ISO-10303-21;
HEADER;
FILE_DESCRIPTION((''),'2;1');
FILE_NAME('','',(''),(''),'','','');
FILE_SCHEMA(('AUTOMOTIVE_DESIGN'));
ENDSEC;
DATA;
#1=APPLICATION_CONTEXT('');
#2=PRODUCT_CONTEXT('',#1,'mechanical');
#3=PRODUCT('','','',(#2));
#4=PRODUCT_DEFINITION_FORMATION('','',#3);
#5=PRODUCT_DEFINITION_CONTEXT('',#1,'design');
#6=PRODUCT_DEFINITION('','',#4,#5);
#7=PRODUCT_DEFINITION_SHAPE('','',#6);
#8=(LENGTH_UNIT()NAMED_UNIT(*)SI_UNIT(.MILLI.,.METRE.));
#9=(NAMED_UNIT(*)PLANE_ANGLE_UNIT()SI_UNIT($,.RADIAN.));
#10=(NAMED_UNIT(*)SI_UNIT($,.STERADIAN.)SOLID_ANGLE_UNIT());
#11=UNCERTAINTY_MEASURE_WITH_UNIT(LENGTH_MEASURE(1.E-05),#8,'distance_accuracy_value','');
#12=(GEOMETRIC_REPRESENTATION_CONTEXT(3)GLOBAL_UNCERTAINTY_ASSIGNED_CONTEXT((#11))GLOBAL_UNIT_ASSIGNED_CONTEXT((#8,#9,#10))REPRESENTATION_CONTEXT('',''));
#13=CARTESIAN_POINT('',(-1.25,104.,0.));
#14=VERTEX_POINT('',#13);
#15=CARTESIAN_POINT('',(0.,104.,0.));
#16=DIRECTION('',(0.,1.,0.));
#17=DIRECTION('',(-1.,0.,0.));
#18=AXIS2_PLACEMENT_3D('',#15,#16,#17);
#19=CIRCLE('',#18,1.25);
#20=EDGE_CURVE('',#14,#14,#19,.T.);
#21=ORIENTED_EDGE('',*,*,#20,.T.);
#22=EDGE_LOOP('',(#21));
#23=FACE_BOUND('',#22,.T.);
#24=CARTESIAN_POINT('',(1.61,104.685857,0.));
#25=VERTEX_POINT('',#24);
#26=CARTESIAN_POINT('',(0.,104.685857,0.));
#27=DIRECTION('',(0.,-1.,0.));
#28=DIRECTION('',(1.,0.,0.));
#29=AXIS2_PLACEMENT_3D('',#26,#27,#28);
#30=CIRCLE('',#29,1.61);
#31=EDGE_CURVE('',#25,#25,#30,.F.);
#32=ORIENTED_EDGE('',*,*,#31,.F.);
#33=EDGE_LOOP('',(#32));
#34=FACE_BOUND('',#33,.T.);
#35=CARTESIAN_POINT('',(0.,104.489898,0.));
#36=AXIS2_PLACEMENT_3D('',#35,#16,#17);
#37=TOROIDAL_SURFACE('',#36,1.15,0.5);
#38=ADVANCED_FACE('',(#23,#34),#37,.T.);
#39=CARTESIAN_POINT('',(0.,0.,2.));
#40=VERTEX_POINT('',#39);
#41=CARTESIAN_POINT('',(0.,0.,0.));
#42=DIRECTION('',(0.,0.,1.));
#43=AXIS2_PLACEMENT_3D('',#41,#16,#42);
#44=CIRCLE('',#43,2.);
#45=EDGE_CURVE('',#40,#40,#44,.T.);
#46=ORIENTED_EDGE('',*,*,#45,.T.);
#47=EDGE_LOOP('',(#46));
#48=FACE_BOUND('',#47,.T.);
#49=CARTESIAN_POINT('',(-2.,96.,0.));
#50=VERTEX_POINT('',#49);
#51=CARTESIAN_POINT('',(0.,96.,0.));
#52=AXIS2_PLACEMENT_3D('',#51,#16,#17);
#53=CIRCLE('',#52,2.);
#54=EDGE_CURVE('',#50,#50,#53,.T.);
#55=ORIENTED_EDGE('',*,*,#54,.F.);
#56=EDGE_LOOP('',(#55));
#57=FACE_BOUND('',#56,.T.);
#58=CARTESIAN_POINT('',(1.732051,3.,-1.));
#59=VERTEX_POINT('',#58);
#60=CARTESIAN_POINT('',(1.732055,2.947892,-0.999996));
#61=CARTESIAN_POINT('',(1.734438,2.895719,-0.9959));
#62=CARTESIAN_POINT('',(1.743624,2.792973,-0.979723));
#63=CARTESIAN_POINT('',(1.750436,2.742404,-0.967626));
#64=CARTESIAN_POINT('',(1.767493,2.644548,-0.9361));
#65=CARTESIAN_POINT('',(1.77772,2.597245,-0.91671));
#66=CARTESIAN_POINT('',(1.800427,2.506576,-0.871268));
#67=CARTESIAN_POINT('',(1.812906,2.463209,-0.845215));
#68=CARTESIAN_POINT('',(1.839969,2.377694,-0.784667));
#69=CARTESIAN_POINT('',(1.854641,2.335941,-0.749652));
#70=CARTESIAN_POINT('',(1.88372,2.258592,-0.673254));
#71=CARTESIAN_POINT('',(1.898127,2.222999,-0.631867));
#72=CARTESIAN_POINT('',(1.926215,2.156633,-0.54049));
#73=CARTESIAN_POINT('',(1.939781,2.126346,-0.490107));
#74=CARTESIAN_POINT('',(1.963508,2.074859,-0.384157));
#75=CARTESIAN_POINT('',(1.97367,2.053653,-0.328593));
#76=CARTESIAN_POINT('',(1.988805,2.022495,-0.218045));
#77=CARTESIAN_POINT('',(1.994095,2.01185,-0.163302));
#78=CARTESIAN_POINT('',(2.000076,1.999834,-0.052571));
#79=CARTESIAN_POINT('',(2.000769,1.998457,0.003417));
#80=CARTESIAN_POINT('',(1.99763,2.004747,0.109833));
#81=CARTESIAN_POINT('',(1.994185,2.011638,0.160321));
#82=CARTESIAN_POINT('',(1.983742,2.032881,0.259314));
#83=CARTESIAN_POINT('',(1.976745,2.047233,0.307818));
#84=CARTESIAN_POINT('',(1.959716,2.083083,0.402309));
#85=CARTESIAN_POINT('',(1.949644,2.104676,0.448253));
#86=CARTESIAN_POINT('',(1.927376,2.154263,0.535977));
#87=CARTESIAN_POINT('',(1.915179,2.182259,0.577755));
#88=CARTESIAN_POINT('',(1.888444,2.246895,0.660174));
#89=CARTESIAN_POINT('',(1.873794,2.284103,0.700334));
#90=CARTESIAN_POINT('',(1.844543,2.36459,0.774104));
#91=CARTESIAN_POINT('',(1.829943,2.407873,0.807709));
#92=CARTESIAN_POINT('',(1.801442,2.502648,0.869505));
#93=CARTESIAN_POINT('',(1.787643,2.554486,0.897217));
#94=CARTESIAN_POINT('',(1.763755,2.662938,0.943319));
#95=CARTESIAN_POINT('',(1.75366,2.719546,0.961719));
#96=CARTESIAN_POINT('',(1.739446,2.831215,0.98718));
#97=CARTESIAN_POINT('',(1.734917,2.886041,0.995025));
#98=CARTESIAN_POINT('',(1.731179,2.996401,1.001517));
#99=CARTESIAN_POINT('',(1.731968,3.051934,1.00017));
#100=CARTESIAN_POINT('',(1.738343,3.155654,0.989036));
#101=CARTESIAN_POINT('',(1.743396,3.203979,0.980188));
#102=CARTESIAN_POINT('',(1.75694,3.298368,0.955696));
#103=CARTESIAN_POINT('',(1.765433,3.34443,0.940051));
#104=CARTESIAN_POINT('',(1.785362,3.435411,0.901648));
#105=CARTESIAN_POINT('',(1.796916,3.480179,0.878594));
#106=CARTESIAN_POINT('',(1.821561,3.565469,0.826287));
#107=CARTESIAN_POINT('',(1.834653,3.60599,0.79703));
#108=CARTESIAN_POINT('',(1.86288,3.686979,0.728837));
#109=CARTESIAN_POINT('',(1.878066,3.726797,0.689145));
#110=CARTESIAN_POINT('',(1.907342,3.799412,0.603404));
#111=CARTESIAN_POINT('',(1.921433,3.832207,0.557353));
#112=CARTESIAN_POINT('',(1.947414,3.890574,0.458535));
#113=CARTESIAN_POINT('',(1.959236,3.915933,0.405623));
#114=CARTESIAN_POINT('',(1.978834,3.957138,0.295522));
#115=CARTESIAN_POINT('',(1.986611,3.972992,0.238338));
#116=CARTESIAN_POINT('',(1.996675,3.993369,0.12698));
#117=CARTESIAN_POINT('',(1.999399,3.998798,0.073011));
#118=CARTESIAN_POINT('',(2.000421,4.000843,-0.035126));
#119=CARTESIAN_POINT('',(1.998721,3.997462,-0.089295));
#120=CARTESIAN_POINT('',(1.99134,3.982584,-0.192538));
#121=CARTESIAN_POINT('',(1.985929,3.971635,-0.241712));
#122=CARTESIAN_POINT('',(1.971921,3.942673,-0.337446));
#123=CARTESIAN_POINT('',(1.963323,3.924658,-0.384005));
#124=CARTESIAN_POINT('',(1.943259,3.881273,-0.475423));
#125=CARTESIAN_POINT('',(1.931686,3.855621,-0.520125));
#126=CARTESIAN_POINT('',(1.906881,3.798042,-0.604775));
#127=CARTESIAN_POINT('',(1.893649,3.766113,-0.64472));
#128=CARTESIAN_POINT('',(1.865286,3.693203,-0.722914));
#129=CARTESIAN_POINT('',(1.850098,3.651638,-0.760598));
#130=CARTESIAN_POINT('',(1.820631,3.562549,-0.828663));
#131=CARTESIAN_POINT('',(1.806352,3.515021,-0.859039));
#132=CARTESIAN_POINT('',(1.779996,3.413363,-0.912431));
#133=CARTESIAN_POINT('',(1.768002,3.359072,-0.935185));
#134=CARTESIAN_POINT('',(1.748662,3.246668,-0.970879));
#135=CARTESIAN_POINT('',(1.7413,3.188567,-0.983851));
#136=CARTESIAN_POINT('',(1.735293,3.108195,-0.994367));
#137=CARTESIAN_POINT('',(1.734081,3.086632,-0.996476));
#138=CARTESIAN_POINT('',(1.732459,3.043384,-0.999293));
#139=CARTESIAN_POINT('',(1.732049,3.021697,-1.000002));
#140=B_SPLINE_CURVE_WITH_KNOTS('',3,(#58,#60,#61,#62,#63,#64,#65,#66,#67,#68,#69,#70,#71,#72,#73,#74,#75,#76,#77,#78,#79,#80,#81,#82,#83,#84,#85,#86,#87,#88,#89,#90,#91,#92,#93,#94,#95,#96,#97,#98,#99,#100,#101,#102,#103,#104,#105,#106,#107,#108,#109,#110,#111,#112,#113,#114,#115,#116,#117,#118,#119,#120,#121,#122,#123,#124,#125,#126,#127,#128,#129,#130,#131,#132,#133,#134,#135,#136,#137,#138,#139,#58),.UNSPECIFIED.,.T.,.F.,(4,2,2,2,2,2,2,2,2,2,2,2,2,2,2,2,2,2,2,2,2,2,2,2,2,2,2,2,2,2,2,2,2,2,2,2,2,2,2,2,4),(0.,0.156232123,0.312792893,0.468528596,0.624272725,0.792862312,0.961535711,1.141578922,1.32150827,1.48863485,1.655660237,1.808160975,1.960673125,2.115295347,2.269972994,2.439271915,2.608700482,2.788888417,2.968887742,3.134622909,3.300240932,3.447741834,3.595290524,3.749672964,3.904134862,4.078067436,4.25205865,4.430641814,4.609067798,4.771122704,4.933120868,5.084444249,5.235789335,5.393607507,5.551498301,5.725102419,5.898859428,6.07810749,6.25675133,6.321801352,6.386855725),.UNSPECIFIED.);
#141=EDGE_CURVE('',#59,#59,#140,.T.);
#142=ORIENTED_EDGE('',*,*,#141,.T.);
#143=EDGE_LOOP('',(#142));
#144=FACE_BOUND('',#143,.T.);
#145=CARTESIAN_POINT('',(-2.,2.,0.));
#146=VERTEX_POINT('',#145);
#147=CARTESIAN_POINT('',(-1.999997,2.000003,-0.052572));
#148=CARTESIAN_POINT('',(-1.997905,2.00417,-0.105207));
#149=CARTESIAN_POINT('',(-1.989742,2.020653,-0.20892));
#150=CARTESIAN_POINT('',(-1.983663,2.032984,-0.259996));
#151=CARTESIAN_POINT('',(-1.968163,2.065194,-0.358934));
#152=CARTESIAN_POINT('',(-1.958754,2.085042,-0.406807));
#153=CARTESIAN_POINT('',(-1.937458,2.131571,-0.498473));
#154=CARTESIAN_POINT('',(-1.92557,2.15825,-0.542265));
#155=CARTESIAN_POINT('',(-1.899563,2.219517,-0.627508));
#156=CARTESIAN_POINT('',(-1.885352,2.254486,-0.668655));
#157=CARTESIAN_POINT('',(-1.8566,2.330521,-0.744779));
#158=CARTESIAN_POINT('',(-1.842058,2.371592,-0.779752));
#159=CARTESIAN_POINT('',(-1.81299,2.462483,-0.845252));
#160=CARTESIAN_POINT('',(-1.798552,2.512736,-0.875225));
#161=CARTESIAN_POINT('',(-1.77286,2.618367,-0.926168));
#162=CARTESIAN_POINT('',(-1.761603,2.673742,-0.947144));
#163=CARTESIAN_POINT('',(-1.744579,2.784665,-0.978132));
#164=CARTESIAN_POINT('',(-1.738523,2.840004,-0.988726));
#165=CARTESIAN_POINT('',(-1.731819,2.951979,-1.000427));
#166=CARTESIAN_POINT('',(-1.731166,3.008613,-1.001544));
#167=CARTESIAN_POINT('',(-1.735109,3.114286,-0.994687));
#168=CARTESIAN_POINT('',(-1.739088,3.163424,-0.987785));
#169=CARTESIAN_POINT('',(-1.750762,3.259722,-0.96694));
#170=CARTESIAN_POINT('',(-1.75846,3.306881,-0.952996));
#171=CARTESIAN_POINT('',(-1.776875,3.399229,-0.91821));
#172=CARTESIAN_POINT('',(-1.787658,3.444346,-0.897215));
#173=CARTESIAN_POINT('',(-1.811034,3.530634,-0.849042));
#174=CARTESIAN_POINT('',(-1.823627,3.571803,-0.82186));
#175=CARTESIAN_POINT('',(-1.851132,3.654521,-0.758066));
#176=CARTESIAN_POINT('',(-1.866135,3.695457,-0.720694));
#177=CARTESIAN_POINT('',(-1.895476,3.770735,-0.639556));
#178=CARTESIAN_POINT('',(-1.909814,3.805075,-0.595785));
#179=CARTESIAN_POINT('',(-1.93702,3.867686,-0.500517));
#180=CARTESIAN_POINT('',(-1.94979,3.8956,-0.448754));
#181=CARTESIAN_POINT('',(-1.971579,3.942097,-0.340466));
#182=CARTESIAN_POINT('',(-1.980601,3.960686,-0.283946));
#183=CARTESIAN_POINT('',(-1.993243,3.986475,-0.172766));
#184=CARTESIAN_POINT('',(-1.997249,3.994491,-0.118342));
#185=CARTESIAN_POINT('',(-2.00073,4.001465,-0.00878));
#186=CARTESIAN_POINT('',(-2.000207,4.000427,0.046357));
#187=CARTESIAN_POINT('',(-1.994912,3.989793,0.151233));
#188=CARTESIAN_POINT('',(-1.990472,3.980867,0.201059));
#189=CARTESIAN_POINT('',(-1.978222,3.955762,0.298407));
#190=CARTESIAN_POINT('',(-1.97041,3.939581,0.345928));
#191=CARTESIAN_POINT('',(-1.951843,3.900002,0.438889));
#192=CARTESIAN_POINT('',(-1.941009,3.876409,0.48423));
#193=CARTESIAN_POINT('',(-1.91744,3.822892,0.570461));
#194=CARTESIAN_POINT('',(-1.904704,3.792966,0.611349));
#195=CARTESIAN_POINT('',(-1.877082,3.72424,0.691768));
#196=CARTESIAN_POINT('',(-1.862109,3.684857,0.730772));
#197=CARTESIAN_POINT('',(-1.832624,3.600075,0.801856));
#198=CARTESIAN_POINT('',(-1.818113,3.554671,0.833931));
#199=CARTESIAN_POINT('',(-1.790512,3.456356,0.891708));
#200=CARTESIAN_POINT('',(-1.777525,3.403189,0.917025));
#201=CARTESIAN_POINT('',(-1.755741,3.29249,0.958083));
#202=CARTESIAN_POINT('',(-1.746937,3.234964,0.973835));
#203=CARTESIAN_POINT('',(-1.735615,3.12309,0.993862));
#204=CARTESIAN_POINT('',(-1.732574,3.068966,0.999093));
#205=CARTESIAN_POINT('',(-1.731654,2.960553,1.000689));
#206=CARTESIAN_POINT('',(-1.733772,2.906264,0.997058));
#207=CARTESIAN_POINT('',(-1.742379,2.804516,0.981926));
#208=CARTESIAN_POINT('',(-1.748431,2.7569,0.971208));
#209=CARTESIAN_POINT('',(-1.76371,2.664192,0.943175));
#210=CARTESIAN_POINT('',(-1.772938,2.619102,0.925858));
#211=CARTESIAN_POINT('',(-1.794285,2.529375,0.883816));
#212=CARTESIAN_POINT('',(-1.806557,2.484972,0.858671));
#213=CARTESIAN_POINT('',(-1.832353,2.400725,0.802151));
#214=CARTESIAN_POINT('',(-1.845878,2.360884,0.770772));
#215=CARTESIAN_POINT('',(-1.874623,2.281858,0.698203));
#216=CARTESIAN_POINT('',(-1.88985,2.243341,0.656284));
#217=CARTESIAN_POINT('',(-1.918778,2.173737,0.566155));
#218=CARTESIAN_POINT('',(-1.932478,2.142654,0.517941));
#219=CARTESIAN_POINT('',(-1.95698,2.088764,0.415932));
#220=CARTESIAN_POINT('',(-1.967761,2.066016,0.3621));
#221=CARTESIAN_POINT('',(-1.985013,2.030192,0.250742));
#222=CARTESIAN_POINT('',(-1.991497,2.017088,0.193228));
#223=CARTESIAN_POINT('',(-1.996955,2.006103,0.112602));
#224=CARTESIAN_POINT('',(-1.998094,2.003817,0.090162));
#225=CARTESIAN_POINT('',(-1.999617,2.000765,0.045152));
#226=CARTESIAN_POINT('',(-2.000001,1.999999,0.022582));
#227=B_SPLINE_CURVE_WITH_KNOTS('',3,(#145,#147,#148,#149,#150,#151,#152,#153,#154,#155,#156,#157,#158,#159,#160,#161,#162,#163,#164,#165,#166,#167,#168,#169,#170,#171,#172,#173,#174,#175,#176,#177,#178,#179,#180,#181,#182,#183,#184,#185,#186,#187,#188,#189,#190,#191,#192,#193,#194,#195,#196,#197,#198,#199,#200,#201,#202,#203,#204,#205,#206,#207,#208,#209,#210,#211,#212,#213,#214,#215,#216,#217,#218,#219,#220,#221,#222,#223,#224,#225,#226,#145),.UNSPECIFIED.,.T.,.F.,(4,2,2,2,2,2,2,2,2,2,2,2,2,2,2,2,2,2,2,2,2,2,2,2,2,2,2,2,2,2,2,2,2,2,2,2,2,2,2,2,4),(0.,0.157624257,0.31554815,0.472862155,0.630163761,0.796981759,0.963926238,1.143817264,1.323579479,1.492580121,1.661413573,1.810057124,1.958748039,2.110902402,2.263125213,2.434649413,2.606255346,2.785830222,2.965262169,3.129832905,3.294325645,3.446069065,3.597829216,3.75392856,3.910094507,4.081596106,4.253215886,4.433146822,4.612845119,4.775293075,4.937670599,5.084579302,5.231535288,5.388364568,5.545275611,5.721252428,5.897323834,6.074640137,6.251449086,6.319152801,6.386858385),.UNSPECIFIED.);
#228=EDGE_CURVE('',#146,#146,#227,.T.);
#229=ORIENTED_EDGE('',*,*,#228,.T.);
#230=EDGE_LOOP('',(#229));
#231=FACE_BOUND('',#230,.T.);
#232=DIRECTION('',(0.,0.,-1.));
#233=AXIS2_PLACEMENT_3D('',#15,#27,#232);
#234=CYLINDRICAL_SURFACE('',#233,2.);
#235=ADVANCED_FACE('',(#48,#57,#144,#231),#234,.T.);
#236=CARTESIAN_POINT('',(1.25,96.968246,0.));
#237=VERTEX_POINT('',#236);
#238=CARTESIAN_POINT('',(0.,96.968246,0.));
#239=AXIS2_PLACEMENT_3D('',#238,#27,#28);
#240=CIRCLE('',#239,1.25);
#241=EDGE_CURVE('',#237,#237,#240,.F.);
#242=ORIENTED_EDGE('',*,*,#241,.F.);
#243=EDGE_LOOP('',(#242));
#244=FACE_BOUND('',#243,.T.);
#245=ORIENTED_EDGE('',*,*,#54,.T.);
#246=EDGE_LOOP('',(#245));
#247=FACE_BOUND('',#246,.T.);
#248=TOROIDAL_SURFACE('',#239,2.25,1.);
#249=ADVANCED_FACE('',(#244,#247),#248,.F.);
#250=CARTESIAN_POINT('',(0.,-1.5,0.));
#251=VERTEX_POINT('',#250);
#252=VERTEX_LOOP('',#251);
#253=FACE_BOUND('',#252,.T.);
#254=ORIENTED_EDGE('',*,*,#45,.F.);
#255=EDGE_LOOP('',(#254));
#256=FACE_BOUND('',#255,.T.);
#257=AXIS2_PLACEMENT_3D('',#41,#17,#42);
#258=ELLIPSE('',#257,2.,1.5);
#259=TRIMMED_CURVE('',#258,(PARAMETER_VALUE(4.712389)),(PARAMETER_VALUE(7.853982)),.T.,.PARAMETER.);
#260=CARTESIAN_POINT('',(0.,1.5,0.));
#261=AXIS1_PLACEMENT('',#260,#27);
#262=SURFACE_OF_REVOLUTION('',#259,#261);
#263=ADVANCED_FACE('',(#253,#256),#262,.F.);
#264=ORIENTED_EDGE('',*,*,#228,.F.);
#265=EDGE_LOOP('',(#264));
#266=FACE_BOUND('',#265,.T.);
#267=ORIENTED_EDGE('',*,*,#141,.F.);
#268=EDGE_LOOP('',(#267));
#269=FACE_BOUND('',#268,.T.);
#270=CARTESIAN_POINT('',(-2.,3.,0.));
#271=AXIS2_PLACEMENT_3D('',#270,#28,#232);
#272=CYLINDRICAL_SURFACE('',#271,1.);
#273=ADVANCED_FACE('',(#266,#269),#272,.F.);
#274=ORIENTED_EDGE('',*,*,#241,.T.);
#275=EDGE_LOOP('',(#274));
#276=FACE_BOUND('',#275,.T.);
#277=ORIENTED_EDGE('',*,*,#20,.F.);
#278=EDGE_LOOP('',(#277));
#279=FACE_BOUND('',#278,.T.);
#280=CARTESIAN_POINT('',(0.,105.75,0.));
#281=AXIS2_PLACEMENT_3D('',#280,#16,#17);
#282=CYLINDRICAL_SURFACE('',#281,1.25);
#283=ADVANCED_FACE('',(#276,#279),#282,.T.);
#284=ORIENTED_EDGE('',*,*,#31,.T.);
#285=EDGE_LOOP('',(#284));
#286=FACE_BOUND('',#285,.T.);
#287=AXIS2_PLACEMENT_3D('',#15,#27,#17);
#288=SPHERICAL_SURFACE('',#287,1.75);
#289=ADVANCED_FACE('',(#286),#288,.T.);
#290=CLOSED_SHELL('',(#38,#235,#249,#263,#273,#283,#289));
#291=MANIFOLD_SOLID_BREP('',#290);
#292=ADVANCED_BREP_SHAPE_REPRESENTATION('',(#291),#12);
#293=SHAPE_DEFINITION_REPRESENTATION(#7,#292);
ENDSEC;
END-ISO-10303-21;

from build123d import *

# Parameters (mm, degrees)
SKETCH1_R               = 2
BOSS_EXTRUDE1_DEPTH     = 104
DOME2_FACE_RADIUS       = 2
DOME2_HEIGHT            = 1.5
CUT_EXTRUDE1_DEPTH      = 105.038454433
CUT_EXTRUDE1_DEPTH_BACK = 105.038454433
SKETCH2_R               = 1
SKETCH6_W               = 0.75
SKETCH6_H               = 8
FILLET1_R               = 0.5
FILLET2_R               = 1


with BuildPart() as part:
    # Sketch1 → Boss-Extrude1 (new body)
    with BuildSketch(Plane(origin=(0, 0, 0), x_dir=(1, 0, 0), z_dir=(0, 1, 0))):
        with Locations(Location((0, 0, 0), (0, 0, 90))):
            Circle(SKETCH1_R)
    extrude(amount=BOSS_EXTRUDE1_DEPTH)

    # Dome2: an elliptical dome of height H over a round flat face of radius A is half a spheroid: the quarter ellipse of half axes A and H revolved about the face's axis
    with BuildSketch(Plane((0, 0, 0), x_dir=(0, 0, 1), z_dir=(1, 0, 0)), mode=Mode.PRIVATE) as dome2_quarter:
        Ellipse(DOME2_FACE_RADIUS, DOME2_HEIGHT)
        Rectangle(DOME2_FACE_RADIUS, DOME2_HEIGHT, align=(Align.MIN, Align.MIN), mode=Mode.INTERSECT)
    revolve(dome2_quarter.sketch, axis=Axis((0, 0, 0), (0, -1, 0)))

    # Sketch2 → Cut-Extrude1 (cut, two sides: drawn at the far end of the back side and taken through both)
    with BuildSketch(Plane(origin=(0, 0, 0), x_dir=(0, 0, -1), z_dir=(1, 0, 0)).offset(-CUT_EXTRUDE1_DEPTH_BACK)):
        with Locations((0, 3)):
            Circle(SKETCH2_R)
    extrude(amount=CUT_EXTRUDE1_DEPTH + CUT_EXTRUDE1_DEPTH_BACK, mode=Mode.SUBTRACT)

    # Sketch5 → Revolve1 (revolve)
    with BuildSketch(Plane.XY):
        with BuildLine():
            Line((0, 102.25), (0, 105.75))
            ThreePointArc((0, 105.75), (1.75, 104), (0, 102.25))
        make_face()
    revolve(axis=Axis((0, 102.25, 0), (0, 1, 0)))

    # Sketch6 → Cut-Revolve1 (revolve, cut)
    with BuildSketch(Plane.XY, mode=Mode.PRIVATE) as cut_revolve1_sk:
        with Locations((1.625, 100)):
            Rectangle(SKETCH6_W, SKETCH6_H)
    revolve(cut_revolve1_sk.sketch.rotate(Axis((0, 105.75, 0), (0, -1, 0)), 180), axis=Axis((0, 105.75, 0), (0, -1, 0)), mode=Mode.SUBTRACT)

    # Fillet1
    # the kernel refuses this fillet: 0.5 mm, written as the material it takes off along each edge
    with BuildSketch(Plane(origin=(0, 104, 0), x_dir=(1, 0, 0), z_dir=(0, 0, -1))) as fillet1_piece_1:
        with BuildLine():
            CenterArc((1.15, -0.489897949), FILLET1_R, 336.926081934, 101.536959033)
            Line((1.61, -0.685857128), (1.6192, -0.689776312))
            ThreePointArc((1.6192, -0.689776312), (1.724440779, -0.352), (1.76, 0))
            Line((1.76, 0), (1.75, 0.01))
            ThreePointArc((1.75, 0.01), (1.5, 0.01), (1.252, 0.009797959))
            Line((1.252, 0.009797959), (1.25, 0))
        make_face()
    revolve(axis=Axis((0, 104, 0), (0, -1, 0)), mode=Mode.SUBTRACT)

    # Fillet2
    # the kernel refuses this fillet: 1 mm, written as the material it adds along each edge
    with BuildSketch(Plane(origin=(0, 96, 0), x_dir=(-1, 0, 0), z_dir=(0, 0, 1))) as fillet2_piece_1:
        with BuildLine():
            CenterArc((2.25, -0.968245837), FILLET2_R, 104.477512186, 75.522487814)
            Line((1.25, -0.968245837), (1.23, -0.968245837))
            Line((1.23, -0.968245837), (1.23, 0))
            Line((1.23, 0), (1.25, 0.02))
            ThreePointArc((1.25, 0.02), (1.625, 0.02), (1.995, 0.019364917))
            Line((1.995, 0.019364917), (2, 0))
        make_face()
    revolve(axis=Axis((0, 96, 0), (0, -1, 0)))


solid = part.part
